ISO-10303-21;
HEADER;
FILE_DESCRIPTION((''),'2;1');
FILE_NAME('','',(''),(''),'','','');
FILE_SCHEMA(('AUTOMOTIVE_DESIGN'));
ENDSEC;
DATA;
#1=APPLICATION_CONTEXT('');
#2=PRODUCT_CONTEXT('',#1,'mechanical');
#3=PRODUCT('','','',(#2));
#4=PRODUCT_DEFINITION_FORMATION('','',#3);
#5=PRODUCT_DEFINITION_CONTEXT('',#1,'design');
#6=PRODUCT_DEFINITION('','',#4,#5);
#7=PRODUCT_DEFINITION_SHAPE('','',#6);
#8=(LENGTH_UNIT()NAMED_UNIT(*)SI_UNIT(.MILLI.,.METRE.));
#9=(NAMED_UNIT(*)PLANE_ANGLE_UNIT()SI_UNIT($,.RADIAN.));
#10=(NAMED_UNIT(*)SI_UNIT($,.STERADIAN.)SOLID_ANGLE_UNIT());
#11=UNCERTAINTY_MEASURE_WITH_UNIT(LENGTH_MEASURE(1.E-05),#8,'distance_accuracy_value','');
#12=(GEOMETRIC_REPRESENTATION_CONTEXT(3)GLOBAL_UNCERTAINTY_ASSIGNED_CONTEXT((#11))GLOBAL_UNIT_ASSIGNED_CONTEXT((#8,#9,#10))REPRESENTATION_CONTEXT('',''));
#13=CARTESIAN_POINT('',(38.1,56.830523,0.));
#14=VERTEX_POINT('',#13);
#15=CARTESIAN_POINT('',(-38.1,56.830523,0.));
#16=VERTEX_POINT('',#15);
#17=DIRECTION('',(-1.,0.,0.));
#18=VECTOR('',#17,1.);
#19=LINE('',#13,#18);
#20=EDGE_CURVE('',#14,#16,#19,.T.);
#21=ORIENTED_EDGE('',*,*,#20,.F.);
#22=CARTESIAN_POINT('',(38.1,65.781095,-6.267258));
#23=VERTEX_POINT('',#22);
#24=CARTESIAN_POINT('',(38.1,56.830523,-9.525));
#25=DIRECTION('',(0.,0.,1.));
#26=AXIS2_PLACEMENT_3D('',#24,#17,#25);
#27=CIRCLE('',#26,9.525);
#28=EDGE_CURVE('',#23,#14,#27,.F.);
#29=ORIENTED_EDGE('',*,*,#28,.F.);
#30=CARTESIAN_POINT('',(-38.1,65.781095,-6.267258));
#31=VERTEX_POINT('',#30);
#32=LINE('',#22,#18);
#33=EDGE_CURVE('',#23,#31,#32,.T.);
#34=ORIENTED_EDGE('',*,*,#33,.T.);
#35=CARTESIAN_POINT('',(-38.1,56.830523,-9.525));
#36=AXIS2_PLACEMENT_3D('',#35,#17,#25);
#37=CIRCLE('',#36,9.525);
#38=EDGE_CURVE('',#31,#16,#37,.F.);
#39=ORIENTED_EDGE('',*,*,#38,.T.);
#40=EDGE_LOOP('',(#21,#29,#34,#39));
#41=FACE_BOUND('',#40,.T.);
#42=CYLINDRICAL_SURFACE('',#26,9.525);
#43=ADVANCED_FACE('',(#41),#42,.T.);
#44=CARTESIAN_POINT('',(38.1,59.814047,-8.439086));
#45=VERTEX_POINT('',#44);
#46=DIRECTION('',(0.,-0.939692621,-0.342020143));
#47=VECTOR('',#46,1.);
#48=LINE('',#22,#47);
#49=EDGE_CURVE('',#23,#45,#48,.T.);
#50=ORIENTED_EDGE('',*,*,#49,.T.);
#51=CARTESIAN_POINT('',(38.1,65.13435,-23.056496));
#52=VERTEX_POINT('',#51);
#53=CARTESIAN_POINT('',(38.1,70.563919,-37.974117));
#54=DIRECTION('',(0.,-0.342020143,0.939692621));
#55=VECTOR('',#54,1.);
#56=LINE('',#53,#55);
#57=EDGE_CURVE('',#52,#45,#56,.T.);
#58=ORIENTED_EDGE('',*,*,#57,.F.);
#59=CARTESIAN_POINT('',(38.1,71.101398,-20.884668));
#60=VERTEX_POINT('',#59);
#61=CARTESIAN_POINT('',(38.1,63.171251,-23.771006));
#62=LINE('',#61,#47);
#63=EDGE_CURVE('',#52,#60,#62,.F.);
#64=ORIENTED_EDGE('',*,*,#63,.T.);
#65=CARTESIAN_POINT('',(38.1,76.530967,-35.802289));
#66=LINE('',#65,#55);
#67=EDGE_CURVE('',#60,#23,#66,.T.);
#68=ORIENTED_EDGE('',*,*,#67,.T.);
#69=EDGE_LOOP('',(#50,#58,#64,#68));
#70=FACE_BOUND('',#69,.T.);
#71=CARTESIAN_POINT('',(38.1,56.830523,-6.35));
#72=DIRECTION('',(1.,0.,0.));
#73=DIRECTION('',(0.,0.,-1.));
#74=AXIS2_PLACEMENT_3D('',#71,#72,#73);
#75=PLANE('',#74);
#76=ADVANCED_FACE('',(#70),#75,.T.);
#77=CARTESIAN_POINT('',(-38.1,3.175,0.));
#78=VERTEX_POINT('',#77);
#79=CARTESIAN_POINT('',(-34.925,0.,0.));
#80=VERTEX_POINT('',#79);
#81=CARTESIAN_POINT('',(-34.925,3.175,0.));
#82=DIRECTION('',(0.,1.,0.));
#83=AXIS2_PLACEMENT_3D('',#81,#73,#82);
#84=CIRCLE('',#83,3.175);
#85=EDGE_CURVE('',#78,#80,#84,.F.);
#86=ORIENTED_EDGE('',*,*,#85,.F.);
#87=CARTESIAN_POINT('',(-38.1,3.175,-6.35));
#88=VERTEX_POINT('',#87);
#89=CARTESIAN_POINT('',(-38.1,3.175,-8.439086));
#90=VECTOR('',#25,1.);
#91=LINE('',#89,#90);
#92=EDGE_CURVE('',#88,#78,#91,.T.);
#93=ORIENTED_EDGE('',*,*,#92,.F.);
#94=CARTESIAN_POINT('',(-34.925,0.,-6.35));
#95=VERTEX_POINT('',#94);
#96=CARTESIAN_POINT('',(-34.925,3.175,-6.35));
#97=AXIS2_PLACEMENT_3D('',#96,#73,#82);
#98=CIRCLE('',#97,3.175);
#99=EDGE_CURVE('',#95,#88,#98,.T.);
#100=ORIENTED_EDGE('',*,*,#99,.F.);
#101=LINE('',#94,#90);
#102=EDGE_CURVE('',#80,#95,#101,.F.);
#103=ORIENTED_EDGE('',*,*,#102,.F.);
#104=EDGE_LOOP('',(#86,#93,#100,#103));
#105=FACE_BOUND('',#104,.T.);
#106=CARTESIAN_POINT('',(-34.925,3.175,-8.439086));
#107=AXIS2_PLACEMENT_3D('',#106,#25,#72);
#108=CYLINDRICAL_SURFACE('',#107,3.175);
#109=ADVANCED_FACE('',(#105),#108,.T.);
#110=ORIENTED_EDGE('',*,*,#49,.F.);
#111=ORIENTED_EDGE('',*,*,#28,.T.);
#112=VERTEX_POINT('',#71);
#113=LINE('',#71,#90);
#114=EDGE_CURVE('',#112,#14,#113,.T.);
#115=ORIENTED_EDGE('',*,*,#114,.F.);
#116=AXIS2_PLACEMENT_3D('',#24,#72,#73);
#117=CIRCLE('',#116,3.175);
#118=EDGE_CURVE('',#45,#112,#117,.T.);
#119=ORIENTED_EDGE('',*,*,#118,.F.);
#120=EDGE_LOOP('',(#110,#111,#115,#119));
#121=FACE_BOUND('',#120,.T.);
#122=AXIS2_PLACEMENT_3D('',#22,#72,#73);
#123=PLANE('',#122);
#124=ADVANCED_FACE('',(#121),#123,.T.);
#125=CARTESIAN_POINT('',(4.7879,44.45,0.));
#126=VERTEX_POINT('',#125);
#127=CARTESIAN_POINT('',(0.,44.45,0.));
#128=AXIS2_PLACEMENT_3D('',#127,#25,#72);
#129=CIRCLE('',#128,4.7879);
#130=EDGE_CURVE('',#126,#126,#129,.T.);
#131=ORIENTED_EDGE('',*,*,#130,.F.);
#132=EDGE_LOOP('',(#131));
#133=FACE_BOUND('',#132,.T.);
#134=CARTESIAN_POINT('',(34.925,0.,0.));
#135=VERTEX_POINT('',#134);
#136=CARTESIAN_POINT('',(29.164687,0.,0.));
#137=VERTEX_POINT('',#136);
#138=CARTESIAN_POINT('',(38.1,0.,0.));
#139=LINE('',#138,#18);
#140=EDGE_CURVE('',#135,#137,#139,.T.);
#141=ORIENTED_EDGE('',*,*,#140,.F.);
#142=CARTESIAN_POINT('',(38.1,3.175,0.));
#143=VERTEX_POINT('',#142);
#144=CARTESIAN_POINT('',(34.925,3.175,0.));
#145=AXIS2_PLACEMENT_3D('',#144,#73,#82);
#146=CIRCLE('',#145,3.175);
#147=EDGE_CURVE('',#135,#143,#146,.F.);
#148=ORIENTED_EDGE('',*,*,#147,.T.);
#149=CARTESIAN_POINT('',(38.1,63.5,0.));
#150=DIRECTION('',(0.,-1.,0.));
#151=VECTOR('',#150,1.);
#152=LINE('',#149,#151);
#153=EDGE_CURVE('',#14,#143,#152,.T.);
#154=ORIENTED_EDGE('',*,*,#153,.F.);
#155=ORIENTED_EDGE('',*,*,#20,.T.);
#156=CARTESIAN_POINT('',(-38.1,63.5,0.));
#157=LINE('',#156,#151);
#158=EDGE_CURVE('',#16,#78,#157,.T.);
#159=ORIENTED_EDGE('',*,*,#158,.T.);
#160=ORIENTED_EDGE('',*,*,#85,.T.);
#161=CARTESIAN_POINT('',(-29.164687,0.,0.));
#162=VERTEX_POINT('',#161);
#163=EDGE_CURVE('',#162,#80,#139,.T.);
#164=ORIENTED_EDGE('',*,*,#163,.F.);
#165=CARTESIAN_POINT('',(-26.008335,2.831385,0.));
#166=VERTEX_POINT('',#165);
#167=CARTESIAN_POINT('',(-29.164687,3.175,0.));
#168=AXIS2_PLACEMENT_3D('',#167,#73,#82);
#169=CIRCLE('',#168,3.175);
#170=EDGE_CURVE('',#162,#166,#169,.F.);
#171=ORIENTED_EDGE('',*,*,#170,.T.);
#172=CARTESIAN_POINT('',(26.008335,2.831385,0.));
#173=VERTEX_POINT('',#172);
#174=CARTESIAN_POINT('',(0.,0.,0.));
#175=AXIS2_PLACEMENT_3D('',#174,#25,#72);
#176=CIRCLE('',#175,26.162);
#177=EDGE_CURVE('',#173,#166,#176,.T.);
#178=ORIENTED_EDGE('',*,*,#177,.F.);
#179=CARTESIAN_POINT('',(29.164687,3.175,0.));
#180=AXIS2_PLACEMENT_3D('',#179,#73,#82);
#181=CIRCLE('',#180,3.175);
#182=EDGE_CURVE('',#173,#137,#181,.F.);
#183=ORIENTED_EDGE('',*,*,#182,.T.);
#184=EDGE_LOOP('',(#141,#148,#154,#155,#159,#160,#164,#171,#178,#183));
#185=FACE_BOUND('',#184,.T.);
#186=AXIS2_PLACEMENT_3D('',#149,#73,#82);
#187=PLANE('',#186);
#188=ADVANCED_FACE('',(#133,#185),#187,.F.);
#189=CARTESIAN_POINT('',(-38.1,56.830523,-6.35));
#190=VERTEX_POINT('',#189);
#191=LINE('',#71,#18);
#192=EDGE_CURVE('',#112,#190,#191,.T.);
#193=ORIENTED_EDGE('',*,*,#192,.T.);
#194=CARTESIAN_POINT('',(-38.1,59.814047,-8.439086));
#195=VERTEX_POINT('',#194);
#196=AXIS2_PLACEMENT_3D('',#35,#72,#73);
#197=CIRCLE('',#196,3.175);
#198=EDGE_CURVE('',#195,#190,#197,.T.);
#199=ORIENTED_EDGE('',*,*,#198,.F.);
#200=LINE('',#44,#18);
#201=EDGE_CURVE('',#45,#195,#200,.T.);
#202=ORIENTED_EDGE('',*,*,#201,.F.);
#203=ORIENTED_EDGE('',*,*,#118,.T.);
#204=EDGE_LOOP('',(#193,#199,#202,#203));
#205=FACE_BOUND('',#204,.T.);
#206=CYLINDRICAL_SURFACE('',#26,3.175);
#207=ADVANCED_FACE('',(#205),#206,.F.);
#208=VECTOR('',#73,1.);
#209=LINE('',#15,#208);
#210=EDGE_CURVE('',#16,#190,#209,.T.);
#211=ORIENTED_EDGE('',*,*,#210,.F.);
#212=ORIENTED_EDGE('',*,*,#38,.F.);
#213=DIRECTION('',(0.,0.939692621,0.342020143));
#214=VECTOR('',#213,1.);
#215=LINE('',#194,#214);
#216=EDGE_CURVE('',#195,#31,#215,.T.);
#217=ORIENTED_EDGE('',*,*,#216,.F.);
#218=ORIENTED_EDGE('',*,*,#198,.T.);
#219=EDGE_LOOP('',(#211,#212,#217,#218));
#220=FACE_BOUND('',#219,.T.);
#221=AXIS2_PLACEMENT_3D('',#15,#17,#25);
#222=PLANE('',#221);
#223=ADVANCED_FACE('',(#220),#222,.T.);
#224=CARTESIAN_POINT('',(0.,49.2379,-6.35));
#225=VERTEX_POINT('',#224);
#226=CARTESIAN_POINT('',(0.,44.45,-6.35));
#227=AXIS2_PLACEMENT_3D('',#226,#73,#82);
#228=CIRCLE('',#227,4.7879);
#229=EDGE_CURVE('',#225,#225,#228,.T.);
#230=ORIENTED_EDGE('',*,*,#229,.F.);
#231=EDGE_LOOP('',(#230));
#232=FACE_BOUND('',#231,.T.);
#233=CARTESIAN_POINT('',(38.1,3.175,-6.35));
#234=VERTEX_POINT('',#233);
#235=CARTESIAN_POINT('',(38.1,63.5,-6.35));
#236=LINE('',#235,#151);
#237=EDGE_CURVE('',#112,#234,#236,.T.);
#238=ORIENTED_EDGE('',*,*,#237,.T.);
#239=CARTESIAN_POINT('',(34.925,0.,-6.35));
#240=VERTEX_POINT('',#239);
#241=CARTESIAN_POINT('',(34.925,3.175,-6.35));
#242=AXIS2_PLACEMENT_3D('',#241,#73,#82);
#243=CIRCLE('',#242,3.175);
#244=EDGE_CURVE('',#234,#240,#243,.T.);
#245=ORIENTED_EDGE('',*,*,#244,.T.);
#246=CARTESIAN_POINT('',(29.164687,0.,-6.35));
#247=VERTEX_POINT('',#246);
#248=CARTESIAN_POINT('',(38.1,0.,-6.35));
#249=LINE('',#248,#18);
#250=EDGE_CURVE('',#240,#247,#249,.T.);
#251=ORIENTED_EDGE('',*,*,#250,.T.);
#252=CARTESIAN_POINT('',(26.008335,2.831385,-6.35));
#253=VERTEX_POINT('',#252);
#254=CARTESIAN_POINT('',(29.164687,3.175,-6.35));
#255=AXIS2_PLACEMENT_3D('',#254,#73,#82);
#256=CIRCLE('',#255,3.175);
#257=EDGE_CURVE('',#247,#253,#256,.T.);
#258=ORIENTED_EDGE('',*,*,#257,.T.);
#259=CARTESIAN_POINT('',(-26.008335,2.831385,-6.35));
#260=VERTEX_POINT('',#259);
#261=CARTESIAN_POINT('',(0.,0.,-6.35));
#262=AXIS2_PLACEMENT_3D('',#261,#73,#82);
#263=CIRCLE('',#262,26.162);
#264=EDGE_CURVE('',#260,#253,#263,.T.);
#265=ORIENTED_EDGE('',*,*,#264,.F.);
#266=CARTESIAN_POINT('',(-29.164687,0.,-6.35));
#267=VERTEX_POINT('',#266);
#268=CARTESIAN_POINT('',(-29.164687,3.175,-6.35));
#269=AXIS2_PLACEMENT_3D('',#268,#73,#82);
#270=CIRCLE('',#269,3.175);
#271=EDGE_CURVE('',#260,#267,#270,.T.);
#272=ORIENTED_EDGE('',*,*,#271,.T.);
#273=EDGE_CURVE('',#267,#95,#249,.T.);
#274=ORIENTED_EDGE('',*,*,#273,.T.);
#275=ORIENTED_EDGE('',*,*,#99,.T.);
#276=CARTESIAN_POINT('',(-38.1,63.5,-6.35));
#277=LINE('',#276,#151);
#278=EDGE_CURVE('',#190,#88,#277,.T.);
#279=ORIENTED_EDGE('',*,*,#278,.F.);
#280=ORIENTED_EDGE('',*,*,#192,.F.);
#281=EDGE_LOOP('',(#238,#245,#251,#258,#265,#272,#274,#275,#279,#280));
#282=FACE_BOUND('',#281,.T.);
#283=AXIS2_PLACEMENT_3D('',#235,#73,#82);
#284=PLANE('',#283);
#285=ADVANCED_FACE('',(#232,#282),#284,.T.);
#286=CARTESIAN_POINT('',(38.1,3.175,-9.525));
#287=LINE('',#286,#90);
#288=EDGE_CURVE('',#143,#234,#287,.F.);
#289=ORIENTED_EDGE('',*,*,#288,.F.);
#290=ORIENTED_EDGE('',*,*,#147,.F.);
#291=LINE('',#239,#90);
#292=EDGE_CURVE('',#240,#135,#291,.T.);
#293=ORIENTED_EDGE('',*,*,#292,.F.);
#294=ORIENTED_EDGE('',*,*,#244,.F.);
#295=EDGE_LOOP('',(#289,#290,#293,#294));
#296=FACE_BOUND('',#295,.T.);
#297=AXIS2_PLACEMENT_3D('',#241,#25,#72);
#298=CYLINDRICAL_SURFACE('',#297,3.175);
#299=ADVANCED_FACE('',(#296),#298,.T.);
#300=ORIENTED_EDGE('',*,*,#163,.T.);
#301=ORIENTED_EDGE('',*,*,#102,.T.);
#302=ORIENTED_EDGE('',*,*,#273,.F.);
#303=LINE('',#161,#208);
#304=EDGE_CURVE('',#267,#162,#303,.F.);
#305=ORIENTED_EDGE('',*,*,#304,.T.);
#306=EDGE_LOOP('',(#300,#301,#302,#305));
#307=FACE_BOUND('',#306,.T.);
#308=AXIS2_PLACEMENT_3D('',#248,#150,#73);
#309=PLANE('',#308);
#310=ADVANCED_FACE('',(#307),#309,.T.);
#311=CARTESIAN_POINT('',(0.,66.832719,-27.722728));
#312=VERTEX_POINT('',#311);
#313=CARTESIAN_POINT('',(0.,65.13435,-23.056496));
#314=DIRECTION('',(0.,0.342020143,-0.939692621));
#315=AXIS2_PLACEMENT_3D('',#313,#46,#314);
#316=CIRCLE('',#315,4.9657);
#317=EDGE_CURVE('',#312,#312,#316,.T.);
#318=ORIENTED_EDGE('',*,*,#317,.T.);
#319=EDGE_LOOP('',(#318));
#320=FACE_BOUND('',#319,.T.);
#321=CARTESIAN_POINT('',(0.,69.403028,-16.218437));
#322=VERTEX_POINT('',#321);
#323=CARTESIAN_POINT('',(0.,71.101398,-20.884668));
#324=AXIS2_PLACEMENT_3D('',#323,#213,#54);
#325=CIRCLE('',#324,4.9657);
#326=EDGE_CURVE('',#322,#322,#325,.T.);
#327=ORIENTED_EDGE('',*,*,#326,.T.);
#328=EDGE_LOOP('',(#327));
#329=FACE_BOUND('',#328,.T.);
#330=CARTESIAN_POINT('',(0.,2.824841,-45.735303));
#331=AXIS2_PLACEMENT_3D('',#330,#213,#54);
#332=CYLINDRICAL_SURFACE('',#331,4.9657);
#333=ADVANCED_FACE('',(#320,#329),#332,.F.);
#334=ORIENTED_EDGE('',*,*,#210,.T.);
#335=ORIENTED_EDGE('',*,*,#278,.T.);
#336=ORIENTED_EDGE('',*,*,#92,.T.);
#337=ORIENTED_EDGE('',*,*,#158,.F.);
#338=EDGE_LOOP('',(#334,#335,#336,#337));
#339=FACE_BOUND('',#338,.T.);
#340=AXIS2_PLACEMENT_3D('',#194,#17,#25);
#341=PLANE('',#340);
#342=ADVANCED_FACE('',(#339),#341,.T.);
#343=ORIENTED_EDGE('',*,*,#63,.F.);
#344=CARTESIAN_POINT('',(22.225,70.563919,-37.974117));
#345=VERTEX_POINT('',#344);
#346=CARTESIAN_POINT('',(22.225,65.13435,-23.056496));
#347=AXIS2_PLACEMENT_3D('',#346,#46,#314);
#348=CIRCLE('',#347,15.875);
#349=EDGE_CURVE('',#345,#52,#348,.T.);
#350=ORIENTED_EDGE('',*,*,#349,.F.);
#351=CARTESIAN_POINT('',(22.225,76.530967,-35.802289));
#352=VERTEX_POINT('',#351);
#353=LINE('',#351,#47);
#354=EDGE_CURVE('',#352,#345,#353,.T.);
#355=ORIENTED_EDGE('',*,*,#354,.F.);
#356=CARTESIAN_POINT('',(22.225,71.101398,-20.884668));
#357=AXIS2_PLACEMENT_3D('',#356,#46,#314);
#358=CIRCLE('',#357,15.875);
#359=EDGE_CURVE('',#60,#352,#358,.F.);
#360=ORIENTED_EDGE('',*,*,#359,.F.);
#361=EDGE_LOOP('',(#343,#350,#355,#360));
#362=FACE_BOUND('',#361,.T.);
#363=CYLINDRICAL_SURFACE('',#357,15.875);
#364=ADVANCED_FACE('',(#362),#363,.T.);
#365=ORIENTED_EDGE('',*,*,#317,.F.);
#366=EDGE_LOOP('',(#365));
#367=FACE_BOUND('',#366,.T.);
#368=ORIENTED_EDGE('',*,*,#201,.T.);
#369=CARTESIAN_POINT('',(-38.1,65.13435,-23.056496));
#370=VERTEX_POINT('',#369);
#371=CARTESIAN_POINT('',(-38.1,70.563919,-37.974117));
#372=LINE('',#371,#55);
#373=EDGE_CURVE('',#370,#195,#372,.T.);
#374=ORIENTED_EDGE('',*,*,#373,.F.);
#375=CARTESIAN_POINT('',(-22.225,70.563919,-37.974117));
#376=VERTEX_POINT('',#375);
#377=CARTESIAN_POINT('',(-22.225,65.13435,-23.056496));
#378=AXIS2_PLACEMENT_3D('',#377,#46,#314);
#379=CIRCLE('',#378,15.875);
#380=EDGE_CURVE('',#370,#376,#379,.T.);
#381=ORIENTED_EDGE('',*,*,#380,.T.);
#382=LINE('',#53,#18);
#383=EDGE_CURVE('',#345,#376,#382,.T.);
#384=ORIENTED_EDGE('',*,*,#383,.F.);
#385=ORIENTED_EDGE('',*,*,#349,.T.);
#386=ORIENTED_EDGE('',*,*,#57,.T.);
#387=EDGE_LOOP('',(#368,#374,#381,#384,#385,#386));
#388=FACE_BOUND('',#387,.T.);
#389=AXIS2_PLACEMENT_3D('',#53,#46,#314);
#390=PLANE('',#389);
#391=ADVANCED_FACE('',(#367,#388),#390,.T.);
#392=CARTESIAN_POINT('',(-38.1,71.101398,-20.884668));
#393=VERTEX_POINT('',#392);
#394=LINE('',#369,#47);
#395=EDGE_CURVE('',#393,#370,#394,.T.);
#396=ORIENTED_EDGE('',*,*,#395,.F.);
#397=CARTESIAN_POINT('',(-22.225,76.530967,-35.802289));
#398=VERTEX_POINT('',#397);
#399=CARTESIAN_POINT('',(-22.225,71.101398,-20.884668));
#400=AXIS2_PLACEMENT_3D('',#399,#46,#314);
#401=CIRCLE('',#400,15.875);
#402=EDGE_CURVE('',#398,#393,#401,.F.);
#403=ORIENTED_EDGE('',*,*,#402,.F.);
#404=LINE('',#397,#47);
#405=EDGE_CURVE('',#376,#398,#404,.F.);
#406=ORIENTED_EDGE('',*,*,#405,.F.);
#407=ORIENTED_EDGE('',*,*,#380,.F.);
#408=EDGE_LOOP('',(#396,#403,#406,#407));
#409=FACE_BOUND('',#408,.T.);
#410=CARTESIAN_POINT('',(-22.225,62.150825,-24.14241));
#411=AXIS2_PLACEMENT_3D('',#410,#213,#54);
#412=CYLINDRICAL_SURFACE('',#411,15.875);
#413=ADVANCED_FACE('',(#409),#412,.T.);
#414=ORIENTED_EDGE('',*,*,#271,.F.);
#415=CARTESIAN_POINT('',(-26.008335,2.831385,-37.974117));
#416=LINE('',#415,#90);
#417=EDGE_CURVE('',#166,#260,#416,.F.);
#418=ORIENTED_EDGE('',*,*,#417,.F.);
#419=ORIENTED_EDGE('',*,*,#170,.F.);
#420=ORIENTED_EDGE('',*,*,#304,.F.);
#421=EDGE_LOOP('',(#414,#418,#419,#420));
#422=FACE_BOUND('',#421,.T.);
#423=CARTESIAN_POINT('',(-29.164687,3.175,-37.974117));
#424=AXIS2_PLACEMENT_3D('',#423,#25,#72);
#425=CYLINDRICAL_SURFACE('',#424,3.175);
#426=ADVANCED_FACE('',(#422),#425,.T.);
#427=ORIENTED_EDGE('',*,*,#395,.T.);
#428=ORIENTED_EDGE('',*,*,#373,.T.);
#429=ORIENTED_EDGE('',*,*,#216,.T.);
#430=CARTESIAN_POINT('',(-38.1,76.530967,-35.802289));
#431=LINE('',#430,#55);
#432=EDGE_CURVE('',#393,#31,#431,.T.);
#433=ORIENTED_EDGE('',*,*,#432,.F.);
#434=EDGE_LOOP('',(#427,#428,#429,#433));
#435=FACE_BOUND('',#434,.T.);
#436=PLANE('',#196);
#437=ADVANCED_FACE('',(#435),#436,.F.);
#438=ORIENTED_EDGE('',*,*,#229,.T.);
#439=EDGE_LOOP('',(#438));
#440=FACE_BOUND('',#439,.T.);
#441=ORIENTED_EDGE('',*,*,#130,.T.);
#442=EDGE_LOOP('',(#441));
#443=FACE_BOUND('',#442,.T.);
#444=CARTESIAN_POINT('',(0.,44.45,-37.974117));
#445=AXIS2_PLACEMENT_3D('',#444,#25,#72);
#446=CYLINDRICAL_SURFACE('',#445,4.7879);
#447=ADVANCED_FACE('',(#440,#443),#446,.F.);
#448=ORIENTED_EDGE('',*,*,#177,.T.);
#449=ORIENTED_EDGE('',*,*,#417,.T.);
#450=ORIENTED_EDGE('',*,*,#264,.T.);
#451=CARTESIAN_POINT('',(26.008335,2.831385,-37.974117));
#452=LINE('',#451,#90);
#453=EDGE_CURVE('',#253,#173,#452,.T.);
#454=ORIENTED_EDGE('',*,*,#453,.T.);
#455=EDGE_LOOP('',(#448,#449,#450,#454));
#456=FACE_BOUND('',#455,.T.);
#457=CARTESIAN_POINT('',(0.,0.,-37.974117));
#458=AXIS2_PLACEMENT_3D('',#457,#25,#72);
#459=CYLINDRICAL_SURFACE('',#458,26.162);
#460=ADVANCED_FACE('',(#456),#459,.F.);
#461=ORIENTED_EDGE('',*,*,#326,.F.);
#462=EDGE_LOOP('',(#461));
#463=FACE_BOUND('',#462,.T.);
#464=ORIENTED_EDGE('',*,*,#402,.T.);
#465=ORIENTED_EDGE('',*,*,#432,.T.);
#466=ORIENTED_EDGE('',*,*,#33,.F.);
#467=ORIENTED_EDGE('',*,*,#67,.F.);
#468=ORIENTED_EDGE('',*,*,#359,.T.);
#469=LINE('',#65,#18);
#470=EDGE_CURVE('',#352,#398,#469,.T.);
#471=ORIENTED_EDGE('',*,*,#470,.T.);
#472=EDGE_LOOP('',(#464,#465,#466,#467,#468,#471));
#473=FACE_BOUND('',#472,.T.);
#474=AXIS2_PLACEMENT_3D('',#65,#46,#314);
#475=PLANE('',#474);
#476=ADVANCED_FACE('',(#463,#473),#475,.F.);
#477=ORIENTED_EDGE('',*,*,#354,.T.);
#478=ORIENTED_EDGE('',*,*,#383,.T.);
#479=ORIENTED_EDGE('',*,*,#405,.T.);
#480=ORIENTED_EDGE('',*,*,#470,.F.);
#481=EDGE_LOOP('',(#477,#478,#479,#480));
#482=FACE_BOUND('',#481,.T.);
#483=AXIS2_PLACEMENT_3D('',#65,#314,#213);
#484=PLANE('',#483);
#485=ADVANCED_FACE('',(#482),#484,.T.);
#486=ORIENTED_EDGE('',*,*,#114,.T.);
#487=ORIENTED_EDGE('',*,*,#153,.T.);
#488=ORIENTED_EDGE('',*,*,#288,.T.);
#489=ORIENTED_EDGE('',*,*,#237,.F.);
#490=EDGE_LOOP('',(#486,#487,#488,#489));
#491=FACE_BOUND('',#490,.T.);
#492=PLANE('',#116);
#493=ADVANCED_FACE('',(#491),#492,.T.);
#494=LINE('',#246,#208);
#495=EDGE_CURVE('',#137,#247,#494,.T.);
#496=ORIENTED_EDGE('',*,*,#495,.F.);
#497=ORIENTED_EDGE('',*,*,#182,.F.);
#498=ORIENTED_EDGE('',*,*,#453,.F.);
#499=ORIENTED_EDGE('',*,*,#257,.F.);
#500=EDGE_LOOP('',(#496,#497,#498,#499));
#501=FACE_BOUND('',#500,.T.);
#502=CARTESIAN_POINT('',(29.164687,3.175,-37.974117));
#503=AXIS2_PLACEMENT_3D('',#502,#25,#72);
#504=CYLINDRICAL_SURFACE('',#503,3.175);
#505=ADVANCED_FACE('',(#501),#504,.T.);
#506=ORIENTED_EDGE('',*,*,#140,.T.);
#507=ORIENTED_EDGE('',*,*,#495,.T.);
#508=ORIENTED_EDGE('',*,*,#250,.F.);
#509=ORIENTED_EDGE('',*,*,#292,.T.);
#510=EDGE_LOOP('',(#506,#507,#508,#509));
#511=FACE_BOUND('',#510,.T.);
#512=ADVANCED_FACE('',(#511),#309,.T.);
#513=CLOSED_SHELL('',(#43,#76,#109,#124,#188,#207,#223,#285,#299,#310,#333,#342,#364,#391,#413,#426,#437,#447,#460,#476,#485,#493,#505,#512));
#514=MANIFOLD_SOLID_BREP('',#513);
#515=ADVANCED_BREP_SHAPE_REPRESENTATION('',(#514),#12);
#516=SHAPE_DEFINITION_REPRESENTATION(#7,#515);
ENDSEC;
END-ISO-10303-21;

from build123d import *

# Parameters (mm, degrees)
BASE_FLANGE1_START = -38.1
BASE_FLANGE1_DEPTH = 76.2
SKETCH6_R          = 26.162
SKETCH6_R_2        = 4.7879
CUT_EXTRUDE1_DEPTH = 94.544815593
SKETCH7_R          = 4.9657
CUT_EXTRUDE2_DEPTH = 90.4661943
FILLET1_R          = 15.875
FILLET2_R          = 3.175


# Read off the part's stored shape, not the designer's step: Base-Flange1
with BuildPart() as part:
    # Base-Flange1 outline → Base-Flange1 (new body)
    with BuildSketch(Plane(origin=(0, 0, 0), x_dir=(0, 0, -1), z_dir=(1, 0, 0)).offset(BASE_FLANGE1_START)):
        with BuildLine():
            Line((0, 56.830523199), (0, 0))
            Line((0, 0), (6.35, 0))
            Line((6.35, 0), (6.35, 56.830523199))
            ThreePointArc((6.35, 56.830523199), (6.924192259, 58.651628384), (8.439086045, 59.81404727))
            Line((8.439086045, 59.81404727), (37.974116762, 70.563919319))
            Line((37.974116762, 70.563919319), (35.802288852, 76.530967461))
            Line((35.802288852, 76.530967461), (6.267258135, 65.781095412))
            ThreePointArc((6.267258135, 65.781095412), (1.722576778, 62.293838755), (0, 56.830523199))
        make_face()
    extrude(amount=BASE_FLANGE1_DEPTH)

    # Sketch6 → Cut-Extrude1 (cut, through all)
    with BuildSketch(Plane.XY):
        Circle(SKETCH6_R)
        with Locations((0, 44.45)):
            Circle(SKETCH6_R_2)
    extrude(amount=-CUT_EXTRUDE1_DEPTH, mode=Mode.SUBTRACT)

    # Sketch7 → Cut-Extrude2 (cut, through all)
    with BuildSketch(Plane(origin=(0, 56.071911069, 20.408506608), x_dir=(1, 0, 0), z_dir=(0, 0.9396926207859093, 0.34202014332566627))):
        with Locations(Location((0, 43.943279101, 0), (0, 0, 270))):
            Circle(SKETCH7_R)
    extrude(amount=-CUT_EXTRUDE2_DEPTH, mode=Mode.SUBTRACT)

    # Fillet1
    fillet1_edges = [part.edges().sort_by_distance(p)[0] for p in [
        (38.1, 73.54744339, -36.888202807),
        (-38.1, 73.54744339, -36.888202807),
    ]]
    fillet(fillet1_edges, radius=FILLET1_R)

    # Fillet2
    fillet2_edges = [part.edges().sort_by_distance(p)[0] for p in [
        (26.162, 0, -3.175),
        (-26.162, 0, -3.175),
        (38.1, 0, -3.175),
        (-38.1, 0, -3.175),
    ]]
    fillet(fillet2_edges, radius=FILLET2_R)


solid = part.part
